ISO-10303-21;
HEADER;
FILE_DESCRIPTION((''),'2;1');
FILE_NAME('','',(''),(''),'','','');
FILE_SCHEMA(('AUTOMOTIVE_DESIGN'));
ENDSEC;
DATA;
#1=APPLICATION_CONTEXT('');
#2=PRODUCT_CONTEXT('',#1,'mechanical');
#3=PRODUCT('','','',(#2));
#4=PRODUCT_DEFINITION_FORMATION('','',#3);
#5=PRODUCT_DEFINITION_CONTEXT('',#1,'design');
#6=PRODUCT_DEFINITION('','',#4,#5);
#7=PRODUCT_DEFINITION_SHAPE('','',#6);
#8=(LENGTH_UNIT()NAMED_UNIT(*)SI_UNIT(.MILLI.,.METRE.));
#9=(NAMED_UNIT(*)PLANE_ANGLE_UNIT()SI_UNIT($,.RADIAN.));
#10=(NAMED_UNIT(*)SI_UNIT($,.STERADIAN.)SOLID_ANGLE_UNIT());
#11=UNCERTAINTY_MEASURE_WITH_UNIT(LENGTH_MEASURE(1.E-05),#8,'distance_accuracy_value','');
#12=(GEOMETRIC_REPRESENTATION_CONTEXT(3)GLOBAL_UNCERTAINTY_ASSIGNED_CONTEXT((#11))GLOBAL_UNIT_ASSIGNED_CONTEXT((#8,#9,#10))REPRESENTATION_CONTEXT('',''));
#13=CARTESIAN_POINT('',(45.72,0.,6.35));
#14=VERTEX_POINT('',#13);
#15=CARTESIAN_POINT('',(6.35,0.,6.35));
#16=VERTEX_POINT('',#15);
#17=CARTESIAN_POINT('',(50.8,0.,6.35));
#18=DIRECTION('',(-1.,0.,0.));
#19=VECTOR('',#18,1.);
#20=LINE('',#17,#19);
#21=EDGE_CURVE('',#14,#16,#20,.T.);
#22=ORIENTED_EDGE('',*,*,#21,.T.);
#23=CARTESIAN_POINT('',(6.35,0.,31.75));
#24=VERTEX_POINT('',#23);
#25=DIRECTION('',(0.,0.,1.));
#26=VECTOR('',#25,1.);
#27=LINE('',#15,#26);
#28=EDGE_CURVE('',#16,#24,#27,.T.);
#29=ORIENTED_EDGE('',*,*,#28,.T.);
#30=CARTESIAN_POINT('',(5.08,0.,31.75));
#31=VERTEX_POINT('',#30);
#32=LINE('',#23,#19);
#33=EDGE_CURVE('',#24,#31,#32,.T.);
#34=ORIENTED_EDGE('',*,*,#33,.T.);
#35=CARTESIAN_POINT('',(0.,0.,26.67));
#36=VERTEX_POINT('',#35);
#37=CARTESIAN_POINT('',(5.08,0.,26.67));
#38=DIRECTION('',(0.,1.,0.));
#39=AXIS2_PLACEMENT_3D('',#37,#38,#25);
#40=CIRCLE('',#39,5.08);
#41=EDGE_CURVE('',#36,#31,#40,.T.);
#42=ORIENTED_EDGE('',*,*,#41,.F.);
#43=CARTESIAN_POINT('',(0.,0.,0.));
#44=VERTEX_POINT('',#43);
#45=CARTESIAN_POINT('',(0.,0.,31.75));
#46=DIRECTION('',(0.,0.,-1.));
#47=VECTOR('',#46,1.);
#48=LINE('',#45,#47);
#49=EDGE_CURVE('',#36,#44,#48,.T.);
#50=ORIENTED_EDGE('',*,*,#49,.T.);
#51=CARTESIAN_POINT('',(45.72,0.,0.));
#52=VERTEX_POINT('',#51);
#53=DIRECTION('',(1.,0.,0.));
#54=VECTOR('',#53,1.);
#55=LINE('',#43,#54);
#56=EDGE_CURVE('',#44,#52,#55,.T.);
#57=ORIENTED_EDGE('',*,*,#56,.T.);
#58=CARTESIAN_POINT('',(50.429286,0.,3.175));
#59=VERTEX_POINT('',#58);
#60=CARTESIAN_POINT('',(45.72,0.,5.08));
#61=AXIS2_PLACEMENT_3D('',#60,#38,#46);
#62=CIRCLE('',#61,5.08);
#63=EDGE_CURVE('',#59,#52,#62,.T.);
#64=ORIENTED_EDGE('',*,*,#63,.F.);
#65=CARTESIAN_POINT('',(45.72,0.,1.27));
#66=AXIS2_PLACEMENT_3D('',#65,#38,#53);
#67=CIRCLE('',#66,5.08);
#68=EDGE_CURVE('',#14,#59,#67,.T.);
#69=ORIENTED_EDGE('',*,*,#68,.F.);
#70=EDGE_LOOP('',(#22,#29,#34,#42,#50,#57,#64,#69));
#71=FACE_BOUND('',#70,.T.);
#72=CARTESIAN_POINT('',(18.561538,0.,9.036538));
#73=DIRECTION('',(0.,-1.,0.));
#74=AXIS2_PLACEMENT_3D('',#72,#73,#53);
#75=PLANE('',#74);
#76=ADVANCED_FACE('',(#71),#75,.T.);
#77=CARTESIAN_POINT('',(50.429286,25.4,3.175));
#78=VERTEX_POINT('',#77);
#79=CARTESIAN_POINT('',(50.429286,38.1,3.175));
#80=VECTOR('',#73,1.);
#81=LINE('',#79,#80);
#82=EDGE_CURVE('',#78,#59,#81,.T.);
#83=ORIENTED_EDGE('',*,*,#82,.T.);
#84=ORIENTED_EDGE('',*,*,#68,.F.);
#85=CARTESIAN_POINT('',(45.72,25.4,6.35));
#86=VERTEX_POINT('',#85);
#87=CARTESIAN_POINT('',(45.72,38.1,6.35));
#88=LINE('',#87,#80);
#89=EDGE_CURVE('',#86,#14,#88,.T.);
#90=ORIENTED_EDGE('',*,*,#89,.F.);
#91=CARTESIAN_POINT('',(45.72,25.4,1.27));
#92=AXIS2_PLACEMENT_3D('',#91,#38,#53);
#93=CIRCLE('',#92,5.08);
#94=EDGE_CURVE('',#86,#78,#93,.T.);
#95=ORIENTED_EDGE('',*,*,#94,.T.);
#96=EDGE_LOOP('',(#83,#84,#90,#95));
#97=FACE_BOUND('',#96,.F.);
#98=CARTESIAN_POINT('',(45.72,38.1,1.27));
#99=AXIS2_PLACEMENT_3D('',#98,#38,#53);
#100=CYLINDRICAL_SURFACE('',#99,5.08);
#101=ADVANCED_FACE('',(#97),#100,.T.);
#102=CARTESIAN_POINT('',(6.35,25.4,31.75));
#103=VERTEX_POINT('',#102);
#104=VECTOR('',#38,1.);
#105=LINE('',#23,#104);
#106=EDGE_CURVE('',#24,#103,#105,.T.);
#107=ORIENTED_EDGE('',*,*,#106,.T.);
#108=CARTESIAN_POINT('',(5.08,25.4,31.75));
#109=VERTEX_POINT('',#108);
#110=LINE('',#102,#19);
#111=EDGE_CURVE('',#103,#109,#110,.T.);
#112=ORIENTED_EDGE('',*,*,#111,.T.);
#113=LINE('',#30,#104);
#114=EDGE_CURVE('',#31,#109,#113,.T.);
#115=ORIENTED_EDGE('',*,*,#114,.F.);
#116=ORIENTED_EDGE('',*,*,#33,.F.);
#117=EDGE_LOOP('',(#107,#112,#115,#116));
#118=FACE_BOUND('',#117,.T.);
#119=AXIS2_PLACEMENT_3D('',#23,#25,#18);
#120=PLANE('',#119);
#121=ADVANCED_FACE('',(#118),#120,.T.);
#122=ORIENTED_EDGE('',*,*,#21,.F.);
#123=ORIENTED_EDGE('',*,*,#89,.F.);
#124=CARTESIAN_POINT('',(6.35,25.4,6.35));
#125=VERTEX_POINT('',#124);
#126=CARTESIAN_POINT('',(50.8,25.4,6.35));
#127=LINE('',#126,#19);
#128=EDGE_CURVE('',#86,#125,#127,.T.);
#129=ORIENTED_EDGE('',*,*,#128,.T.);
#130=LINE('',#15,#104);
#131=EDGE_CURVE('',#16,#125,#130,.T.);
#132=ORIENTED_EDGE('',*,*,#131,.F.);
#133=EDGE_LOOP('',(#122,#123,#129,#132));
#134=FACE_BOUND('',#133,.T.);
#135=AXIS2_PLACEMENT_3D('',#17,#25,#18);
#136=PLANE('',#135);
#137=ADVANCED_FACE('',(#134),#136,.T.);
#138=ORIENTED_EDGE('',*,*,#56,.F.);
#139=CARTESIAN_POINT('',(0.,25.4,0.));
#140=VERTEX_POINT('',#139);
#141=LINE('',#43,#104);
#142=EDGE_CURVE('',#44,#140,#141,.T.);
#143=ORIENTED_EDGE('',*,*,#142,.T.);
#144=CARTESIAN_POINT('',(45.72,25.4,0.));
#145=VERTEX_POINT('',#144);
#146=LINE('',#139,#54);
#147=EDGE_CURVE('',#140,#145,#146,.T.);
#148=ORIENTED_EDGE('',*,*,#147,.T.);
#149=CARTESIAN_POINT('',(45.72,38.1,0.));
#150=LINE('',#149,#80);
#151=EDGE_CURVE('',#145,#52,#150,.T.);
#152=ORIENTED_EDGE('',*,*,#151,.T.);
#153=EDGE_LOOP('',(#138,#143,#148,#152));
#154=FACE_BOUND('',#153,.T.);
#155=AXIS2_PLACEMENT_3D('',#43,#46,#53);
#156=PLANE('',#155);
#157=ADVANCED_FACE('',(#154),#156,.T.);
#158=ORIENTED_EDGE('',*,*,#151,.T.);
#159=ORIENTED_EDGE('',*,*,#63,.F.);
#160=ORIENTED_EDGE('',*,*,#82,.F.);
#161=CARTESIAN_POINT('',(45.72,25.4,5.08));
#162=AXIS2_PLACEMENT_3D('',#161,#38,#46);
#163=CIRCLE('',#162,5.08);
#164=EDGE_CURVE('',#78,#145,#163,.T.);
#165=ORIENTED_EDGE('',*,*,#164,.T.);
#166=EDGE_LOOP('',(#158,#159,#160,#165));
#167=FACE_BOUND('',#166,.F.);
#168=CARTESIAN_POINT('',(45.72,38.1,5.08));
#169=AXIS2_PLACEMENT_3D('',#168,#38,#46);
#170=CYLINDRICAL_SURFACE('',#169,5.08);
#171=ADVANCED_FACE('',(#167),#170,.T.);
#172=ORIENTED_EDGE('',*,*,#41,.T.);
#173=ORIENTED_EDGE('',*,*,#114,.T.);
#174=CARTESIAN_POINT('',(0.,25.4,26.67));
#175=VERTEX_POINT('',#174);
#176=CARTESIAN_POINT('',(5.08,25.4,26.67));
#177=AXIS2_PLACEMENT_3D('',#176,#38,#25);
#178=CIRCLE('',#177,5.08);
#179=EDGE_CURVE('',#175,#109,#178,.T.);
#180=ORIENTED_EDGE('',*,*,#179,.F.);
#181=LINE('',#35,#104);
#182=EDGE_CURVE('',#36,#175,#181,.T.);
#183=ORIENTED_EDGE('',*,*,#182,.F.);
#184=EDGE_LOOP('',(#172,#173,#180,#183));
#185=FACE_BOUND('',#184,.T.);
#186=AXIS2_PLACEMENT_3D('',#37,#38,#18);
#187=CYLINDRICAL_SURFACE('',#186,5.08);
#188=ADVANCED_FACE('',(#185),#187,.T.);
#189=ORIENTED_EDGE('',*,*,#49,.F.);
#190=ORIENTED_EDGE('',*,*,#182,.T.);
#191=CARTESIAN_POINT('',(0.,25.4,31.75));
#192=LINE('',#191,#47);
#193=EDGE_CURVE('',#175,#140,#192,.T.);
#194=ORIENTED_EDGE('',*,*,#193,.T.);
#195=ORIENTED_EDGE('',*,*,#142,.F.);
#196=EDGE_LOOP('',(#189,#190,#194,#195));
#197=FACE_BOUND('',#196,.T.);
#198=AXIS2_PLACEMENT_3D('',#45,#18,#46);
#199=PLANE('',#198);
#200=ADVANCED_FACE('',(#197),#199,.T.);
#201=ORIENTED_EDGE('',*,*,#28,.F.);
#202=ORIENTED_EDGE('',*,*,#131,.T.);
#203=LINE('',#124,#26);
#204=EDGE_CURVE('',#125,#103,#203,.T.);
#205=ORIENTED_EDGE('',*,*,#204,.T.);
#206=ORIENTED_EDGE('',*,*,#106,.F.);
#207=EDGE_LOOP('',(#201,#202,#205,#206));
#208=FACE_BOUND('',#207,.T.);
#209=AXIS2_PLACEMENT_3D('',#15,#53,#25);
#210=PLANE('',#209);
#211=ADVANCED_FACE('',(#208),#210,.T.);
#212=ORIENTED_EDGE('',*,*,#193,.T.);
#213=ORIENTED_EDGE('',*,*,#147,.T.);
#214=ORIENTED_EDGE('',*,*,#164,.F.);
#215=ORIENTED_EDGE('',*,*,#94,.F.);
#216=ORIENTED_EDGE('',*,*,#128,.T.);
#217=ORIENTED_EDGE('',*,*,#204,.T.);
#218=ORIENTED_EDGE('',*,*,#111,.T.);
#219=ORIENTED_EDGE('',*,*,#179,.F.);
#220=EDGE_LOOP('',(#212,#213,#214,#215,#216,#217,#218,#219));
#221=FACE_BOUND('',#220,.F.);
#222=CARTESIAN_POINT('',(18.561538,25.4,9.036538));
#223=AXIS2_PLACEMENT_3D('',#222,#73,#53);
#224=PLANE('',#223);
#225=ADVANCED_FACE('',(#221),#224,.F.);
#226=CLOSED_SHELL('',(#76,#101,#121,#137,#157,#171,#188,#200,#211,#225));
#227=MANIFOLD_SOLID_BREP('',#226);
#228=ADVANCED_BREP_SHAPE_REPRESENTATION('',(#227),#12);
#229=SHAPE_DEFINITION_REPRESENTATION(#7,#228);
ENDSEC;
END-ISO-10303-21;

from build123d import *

# Parameters (mm, degrees)
F1_DEPTH    = 25.4
F2_T1_DEPTH = 50.8
F3_R        = 5.08


# Not quite as in the source:
# - a fillet or chamfer that OpenCascade refuses, or shapes differently, is made with other operations: its cross-section is extruded or revolved along the edge and cut away or added


with BuildPart() as f1:
    # F0 (on Front) → F1 (new body)
    with BuildSketch(Plane.XZ):
        Polygon((0, 31.75), (0, 0), (50.8, 0), (50.8, 6.35), (6.35, 6.35), (6.35, 31.75), align=None)
    extrude(amount=-F1_DEPTH)

    # F2: fillet of radius 5.08 on 2 edges, made by hand

    # F2_s2 → F2_t1 (cut)
    with BuildSketch(Plane.XZ.offset(-38.1)):
        with BuildLine():
            ThreePointArc((50.8, 1.27), (49.3121024484, 4.8621024484), (45.72, 6.35))
            Line((45.72, 6.35), (50.8, 6.35))
            Line((50.8, 6.35), (50.8, 1.27))
        make_face()
        with BuildLine():
            ThreePointArc((45.72, 0), (49.3121024484, 1.4878975516), (50.8, 5.08))
            Line((50.8, 5.08), (50.8, 0))
            Line((50.8, 0), (45.72, 0))
        make_face()
    extrude(amount=F2_T1_DEPTH, mode=Mode.SUBTRACT)

    # F3
    f3_edges = [f1.edges().sort_by_distance(p)[0] for p in [
        (0, 12.7, 31.75),
    ]]
    fillet(f3_edges, radius=F3_R)


solid = f1.part
